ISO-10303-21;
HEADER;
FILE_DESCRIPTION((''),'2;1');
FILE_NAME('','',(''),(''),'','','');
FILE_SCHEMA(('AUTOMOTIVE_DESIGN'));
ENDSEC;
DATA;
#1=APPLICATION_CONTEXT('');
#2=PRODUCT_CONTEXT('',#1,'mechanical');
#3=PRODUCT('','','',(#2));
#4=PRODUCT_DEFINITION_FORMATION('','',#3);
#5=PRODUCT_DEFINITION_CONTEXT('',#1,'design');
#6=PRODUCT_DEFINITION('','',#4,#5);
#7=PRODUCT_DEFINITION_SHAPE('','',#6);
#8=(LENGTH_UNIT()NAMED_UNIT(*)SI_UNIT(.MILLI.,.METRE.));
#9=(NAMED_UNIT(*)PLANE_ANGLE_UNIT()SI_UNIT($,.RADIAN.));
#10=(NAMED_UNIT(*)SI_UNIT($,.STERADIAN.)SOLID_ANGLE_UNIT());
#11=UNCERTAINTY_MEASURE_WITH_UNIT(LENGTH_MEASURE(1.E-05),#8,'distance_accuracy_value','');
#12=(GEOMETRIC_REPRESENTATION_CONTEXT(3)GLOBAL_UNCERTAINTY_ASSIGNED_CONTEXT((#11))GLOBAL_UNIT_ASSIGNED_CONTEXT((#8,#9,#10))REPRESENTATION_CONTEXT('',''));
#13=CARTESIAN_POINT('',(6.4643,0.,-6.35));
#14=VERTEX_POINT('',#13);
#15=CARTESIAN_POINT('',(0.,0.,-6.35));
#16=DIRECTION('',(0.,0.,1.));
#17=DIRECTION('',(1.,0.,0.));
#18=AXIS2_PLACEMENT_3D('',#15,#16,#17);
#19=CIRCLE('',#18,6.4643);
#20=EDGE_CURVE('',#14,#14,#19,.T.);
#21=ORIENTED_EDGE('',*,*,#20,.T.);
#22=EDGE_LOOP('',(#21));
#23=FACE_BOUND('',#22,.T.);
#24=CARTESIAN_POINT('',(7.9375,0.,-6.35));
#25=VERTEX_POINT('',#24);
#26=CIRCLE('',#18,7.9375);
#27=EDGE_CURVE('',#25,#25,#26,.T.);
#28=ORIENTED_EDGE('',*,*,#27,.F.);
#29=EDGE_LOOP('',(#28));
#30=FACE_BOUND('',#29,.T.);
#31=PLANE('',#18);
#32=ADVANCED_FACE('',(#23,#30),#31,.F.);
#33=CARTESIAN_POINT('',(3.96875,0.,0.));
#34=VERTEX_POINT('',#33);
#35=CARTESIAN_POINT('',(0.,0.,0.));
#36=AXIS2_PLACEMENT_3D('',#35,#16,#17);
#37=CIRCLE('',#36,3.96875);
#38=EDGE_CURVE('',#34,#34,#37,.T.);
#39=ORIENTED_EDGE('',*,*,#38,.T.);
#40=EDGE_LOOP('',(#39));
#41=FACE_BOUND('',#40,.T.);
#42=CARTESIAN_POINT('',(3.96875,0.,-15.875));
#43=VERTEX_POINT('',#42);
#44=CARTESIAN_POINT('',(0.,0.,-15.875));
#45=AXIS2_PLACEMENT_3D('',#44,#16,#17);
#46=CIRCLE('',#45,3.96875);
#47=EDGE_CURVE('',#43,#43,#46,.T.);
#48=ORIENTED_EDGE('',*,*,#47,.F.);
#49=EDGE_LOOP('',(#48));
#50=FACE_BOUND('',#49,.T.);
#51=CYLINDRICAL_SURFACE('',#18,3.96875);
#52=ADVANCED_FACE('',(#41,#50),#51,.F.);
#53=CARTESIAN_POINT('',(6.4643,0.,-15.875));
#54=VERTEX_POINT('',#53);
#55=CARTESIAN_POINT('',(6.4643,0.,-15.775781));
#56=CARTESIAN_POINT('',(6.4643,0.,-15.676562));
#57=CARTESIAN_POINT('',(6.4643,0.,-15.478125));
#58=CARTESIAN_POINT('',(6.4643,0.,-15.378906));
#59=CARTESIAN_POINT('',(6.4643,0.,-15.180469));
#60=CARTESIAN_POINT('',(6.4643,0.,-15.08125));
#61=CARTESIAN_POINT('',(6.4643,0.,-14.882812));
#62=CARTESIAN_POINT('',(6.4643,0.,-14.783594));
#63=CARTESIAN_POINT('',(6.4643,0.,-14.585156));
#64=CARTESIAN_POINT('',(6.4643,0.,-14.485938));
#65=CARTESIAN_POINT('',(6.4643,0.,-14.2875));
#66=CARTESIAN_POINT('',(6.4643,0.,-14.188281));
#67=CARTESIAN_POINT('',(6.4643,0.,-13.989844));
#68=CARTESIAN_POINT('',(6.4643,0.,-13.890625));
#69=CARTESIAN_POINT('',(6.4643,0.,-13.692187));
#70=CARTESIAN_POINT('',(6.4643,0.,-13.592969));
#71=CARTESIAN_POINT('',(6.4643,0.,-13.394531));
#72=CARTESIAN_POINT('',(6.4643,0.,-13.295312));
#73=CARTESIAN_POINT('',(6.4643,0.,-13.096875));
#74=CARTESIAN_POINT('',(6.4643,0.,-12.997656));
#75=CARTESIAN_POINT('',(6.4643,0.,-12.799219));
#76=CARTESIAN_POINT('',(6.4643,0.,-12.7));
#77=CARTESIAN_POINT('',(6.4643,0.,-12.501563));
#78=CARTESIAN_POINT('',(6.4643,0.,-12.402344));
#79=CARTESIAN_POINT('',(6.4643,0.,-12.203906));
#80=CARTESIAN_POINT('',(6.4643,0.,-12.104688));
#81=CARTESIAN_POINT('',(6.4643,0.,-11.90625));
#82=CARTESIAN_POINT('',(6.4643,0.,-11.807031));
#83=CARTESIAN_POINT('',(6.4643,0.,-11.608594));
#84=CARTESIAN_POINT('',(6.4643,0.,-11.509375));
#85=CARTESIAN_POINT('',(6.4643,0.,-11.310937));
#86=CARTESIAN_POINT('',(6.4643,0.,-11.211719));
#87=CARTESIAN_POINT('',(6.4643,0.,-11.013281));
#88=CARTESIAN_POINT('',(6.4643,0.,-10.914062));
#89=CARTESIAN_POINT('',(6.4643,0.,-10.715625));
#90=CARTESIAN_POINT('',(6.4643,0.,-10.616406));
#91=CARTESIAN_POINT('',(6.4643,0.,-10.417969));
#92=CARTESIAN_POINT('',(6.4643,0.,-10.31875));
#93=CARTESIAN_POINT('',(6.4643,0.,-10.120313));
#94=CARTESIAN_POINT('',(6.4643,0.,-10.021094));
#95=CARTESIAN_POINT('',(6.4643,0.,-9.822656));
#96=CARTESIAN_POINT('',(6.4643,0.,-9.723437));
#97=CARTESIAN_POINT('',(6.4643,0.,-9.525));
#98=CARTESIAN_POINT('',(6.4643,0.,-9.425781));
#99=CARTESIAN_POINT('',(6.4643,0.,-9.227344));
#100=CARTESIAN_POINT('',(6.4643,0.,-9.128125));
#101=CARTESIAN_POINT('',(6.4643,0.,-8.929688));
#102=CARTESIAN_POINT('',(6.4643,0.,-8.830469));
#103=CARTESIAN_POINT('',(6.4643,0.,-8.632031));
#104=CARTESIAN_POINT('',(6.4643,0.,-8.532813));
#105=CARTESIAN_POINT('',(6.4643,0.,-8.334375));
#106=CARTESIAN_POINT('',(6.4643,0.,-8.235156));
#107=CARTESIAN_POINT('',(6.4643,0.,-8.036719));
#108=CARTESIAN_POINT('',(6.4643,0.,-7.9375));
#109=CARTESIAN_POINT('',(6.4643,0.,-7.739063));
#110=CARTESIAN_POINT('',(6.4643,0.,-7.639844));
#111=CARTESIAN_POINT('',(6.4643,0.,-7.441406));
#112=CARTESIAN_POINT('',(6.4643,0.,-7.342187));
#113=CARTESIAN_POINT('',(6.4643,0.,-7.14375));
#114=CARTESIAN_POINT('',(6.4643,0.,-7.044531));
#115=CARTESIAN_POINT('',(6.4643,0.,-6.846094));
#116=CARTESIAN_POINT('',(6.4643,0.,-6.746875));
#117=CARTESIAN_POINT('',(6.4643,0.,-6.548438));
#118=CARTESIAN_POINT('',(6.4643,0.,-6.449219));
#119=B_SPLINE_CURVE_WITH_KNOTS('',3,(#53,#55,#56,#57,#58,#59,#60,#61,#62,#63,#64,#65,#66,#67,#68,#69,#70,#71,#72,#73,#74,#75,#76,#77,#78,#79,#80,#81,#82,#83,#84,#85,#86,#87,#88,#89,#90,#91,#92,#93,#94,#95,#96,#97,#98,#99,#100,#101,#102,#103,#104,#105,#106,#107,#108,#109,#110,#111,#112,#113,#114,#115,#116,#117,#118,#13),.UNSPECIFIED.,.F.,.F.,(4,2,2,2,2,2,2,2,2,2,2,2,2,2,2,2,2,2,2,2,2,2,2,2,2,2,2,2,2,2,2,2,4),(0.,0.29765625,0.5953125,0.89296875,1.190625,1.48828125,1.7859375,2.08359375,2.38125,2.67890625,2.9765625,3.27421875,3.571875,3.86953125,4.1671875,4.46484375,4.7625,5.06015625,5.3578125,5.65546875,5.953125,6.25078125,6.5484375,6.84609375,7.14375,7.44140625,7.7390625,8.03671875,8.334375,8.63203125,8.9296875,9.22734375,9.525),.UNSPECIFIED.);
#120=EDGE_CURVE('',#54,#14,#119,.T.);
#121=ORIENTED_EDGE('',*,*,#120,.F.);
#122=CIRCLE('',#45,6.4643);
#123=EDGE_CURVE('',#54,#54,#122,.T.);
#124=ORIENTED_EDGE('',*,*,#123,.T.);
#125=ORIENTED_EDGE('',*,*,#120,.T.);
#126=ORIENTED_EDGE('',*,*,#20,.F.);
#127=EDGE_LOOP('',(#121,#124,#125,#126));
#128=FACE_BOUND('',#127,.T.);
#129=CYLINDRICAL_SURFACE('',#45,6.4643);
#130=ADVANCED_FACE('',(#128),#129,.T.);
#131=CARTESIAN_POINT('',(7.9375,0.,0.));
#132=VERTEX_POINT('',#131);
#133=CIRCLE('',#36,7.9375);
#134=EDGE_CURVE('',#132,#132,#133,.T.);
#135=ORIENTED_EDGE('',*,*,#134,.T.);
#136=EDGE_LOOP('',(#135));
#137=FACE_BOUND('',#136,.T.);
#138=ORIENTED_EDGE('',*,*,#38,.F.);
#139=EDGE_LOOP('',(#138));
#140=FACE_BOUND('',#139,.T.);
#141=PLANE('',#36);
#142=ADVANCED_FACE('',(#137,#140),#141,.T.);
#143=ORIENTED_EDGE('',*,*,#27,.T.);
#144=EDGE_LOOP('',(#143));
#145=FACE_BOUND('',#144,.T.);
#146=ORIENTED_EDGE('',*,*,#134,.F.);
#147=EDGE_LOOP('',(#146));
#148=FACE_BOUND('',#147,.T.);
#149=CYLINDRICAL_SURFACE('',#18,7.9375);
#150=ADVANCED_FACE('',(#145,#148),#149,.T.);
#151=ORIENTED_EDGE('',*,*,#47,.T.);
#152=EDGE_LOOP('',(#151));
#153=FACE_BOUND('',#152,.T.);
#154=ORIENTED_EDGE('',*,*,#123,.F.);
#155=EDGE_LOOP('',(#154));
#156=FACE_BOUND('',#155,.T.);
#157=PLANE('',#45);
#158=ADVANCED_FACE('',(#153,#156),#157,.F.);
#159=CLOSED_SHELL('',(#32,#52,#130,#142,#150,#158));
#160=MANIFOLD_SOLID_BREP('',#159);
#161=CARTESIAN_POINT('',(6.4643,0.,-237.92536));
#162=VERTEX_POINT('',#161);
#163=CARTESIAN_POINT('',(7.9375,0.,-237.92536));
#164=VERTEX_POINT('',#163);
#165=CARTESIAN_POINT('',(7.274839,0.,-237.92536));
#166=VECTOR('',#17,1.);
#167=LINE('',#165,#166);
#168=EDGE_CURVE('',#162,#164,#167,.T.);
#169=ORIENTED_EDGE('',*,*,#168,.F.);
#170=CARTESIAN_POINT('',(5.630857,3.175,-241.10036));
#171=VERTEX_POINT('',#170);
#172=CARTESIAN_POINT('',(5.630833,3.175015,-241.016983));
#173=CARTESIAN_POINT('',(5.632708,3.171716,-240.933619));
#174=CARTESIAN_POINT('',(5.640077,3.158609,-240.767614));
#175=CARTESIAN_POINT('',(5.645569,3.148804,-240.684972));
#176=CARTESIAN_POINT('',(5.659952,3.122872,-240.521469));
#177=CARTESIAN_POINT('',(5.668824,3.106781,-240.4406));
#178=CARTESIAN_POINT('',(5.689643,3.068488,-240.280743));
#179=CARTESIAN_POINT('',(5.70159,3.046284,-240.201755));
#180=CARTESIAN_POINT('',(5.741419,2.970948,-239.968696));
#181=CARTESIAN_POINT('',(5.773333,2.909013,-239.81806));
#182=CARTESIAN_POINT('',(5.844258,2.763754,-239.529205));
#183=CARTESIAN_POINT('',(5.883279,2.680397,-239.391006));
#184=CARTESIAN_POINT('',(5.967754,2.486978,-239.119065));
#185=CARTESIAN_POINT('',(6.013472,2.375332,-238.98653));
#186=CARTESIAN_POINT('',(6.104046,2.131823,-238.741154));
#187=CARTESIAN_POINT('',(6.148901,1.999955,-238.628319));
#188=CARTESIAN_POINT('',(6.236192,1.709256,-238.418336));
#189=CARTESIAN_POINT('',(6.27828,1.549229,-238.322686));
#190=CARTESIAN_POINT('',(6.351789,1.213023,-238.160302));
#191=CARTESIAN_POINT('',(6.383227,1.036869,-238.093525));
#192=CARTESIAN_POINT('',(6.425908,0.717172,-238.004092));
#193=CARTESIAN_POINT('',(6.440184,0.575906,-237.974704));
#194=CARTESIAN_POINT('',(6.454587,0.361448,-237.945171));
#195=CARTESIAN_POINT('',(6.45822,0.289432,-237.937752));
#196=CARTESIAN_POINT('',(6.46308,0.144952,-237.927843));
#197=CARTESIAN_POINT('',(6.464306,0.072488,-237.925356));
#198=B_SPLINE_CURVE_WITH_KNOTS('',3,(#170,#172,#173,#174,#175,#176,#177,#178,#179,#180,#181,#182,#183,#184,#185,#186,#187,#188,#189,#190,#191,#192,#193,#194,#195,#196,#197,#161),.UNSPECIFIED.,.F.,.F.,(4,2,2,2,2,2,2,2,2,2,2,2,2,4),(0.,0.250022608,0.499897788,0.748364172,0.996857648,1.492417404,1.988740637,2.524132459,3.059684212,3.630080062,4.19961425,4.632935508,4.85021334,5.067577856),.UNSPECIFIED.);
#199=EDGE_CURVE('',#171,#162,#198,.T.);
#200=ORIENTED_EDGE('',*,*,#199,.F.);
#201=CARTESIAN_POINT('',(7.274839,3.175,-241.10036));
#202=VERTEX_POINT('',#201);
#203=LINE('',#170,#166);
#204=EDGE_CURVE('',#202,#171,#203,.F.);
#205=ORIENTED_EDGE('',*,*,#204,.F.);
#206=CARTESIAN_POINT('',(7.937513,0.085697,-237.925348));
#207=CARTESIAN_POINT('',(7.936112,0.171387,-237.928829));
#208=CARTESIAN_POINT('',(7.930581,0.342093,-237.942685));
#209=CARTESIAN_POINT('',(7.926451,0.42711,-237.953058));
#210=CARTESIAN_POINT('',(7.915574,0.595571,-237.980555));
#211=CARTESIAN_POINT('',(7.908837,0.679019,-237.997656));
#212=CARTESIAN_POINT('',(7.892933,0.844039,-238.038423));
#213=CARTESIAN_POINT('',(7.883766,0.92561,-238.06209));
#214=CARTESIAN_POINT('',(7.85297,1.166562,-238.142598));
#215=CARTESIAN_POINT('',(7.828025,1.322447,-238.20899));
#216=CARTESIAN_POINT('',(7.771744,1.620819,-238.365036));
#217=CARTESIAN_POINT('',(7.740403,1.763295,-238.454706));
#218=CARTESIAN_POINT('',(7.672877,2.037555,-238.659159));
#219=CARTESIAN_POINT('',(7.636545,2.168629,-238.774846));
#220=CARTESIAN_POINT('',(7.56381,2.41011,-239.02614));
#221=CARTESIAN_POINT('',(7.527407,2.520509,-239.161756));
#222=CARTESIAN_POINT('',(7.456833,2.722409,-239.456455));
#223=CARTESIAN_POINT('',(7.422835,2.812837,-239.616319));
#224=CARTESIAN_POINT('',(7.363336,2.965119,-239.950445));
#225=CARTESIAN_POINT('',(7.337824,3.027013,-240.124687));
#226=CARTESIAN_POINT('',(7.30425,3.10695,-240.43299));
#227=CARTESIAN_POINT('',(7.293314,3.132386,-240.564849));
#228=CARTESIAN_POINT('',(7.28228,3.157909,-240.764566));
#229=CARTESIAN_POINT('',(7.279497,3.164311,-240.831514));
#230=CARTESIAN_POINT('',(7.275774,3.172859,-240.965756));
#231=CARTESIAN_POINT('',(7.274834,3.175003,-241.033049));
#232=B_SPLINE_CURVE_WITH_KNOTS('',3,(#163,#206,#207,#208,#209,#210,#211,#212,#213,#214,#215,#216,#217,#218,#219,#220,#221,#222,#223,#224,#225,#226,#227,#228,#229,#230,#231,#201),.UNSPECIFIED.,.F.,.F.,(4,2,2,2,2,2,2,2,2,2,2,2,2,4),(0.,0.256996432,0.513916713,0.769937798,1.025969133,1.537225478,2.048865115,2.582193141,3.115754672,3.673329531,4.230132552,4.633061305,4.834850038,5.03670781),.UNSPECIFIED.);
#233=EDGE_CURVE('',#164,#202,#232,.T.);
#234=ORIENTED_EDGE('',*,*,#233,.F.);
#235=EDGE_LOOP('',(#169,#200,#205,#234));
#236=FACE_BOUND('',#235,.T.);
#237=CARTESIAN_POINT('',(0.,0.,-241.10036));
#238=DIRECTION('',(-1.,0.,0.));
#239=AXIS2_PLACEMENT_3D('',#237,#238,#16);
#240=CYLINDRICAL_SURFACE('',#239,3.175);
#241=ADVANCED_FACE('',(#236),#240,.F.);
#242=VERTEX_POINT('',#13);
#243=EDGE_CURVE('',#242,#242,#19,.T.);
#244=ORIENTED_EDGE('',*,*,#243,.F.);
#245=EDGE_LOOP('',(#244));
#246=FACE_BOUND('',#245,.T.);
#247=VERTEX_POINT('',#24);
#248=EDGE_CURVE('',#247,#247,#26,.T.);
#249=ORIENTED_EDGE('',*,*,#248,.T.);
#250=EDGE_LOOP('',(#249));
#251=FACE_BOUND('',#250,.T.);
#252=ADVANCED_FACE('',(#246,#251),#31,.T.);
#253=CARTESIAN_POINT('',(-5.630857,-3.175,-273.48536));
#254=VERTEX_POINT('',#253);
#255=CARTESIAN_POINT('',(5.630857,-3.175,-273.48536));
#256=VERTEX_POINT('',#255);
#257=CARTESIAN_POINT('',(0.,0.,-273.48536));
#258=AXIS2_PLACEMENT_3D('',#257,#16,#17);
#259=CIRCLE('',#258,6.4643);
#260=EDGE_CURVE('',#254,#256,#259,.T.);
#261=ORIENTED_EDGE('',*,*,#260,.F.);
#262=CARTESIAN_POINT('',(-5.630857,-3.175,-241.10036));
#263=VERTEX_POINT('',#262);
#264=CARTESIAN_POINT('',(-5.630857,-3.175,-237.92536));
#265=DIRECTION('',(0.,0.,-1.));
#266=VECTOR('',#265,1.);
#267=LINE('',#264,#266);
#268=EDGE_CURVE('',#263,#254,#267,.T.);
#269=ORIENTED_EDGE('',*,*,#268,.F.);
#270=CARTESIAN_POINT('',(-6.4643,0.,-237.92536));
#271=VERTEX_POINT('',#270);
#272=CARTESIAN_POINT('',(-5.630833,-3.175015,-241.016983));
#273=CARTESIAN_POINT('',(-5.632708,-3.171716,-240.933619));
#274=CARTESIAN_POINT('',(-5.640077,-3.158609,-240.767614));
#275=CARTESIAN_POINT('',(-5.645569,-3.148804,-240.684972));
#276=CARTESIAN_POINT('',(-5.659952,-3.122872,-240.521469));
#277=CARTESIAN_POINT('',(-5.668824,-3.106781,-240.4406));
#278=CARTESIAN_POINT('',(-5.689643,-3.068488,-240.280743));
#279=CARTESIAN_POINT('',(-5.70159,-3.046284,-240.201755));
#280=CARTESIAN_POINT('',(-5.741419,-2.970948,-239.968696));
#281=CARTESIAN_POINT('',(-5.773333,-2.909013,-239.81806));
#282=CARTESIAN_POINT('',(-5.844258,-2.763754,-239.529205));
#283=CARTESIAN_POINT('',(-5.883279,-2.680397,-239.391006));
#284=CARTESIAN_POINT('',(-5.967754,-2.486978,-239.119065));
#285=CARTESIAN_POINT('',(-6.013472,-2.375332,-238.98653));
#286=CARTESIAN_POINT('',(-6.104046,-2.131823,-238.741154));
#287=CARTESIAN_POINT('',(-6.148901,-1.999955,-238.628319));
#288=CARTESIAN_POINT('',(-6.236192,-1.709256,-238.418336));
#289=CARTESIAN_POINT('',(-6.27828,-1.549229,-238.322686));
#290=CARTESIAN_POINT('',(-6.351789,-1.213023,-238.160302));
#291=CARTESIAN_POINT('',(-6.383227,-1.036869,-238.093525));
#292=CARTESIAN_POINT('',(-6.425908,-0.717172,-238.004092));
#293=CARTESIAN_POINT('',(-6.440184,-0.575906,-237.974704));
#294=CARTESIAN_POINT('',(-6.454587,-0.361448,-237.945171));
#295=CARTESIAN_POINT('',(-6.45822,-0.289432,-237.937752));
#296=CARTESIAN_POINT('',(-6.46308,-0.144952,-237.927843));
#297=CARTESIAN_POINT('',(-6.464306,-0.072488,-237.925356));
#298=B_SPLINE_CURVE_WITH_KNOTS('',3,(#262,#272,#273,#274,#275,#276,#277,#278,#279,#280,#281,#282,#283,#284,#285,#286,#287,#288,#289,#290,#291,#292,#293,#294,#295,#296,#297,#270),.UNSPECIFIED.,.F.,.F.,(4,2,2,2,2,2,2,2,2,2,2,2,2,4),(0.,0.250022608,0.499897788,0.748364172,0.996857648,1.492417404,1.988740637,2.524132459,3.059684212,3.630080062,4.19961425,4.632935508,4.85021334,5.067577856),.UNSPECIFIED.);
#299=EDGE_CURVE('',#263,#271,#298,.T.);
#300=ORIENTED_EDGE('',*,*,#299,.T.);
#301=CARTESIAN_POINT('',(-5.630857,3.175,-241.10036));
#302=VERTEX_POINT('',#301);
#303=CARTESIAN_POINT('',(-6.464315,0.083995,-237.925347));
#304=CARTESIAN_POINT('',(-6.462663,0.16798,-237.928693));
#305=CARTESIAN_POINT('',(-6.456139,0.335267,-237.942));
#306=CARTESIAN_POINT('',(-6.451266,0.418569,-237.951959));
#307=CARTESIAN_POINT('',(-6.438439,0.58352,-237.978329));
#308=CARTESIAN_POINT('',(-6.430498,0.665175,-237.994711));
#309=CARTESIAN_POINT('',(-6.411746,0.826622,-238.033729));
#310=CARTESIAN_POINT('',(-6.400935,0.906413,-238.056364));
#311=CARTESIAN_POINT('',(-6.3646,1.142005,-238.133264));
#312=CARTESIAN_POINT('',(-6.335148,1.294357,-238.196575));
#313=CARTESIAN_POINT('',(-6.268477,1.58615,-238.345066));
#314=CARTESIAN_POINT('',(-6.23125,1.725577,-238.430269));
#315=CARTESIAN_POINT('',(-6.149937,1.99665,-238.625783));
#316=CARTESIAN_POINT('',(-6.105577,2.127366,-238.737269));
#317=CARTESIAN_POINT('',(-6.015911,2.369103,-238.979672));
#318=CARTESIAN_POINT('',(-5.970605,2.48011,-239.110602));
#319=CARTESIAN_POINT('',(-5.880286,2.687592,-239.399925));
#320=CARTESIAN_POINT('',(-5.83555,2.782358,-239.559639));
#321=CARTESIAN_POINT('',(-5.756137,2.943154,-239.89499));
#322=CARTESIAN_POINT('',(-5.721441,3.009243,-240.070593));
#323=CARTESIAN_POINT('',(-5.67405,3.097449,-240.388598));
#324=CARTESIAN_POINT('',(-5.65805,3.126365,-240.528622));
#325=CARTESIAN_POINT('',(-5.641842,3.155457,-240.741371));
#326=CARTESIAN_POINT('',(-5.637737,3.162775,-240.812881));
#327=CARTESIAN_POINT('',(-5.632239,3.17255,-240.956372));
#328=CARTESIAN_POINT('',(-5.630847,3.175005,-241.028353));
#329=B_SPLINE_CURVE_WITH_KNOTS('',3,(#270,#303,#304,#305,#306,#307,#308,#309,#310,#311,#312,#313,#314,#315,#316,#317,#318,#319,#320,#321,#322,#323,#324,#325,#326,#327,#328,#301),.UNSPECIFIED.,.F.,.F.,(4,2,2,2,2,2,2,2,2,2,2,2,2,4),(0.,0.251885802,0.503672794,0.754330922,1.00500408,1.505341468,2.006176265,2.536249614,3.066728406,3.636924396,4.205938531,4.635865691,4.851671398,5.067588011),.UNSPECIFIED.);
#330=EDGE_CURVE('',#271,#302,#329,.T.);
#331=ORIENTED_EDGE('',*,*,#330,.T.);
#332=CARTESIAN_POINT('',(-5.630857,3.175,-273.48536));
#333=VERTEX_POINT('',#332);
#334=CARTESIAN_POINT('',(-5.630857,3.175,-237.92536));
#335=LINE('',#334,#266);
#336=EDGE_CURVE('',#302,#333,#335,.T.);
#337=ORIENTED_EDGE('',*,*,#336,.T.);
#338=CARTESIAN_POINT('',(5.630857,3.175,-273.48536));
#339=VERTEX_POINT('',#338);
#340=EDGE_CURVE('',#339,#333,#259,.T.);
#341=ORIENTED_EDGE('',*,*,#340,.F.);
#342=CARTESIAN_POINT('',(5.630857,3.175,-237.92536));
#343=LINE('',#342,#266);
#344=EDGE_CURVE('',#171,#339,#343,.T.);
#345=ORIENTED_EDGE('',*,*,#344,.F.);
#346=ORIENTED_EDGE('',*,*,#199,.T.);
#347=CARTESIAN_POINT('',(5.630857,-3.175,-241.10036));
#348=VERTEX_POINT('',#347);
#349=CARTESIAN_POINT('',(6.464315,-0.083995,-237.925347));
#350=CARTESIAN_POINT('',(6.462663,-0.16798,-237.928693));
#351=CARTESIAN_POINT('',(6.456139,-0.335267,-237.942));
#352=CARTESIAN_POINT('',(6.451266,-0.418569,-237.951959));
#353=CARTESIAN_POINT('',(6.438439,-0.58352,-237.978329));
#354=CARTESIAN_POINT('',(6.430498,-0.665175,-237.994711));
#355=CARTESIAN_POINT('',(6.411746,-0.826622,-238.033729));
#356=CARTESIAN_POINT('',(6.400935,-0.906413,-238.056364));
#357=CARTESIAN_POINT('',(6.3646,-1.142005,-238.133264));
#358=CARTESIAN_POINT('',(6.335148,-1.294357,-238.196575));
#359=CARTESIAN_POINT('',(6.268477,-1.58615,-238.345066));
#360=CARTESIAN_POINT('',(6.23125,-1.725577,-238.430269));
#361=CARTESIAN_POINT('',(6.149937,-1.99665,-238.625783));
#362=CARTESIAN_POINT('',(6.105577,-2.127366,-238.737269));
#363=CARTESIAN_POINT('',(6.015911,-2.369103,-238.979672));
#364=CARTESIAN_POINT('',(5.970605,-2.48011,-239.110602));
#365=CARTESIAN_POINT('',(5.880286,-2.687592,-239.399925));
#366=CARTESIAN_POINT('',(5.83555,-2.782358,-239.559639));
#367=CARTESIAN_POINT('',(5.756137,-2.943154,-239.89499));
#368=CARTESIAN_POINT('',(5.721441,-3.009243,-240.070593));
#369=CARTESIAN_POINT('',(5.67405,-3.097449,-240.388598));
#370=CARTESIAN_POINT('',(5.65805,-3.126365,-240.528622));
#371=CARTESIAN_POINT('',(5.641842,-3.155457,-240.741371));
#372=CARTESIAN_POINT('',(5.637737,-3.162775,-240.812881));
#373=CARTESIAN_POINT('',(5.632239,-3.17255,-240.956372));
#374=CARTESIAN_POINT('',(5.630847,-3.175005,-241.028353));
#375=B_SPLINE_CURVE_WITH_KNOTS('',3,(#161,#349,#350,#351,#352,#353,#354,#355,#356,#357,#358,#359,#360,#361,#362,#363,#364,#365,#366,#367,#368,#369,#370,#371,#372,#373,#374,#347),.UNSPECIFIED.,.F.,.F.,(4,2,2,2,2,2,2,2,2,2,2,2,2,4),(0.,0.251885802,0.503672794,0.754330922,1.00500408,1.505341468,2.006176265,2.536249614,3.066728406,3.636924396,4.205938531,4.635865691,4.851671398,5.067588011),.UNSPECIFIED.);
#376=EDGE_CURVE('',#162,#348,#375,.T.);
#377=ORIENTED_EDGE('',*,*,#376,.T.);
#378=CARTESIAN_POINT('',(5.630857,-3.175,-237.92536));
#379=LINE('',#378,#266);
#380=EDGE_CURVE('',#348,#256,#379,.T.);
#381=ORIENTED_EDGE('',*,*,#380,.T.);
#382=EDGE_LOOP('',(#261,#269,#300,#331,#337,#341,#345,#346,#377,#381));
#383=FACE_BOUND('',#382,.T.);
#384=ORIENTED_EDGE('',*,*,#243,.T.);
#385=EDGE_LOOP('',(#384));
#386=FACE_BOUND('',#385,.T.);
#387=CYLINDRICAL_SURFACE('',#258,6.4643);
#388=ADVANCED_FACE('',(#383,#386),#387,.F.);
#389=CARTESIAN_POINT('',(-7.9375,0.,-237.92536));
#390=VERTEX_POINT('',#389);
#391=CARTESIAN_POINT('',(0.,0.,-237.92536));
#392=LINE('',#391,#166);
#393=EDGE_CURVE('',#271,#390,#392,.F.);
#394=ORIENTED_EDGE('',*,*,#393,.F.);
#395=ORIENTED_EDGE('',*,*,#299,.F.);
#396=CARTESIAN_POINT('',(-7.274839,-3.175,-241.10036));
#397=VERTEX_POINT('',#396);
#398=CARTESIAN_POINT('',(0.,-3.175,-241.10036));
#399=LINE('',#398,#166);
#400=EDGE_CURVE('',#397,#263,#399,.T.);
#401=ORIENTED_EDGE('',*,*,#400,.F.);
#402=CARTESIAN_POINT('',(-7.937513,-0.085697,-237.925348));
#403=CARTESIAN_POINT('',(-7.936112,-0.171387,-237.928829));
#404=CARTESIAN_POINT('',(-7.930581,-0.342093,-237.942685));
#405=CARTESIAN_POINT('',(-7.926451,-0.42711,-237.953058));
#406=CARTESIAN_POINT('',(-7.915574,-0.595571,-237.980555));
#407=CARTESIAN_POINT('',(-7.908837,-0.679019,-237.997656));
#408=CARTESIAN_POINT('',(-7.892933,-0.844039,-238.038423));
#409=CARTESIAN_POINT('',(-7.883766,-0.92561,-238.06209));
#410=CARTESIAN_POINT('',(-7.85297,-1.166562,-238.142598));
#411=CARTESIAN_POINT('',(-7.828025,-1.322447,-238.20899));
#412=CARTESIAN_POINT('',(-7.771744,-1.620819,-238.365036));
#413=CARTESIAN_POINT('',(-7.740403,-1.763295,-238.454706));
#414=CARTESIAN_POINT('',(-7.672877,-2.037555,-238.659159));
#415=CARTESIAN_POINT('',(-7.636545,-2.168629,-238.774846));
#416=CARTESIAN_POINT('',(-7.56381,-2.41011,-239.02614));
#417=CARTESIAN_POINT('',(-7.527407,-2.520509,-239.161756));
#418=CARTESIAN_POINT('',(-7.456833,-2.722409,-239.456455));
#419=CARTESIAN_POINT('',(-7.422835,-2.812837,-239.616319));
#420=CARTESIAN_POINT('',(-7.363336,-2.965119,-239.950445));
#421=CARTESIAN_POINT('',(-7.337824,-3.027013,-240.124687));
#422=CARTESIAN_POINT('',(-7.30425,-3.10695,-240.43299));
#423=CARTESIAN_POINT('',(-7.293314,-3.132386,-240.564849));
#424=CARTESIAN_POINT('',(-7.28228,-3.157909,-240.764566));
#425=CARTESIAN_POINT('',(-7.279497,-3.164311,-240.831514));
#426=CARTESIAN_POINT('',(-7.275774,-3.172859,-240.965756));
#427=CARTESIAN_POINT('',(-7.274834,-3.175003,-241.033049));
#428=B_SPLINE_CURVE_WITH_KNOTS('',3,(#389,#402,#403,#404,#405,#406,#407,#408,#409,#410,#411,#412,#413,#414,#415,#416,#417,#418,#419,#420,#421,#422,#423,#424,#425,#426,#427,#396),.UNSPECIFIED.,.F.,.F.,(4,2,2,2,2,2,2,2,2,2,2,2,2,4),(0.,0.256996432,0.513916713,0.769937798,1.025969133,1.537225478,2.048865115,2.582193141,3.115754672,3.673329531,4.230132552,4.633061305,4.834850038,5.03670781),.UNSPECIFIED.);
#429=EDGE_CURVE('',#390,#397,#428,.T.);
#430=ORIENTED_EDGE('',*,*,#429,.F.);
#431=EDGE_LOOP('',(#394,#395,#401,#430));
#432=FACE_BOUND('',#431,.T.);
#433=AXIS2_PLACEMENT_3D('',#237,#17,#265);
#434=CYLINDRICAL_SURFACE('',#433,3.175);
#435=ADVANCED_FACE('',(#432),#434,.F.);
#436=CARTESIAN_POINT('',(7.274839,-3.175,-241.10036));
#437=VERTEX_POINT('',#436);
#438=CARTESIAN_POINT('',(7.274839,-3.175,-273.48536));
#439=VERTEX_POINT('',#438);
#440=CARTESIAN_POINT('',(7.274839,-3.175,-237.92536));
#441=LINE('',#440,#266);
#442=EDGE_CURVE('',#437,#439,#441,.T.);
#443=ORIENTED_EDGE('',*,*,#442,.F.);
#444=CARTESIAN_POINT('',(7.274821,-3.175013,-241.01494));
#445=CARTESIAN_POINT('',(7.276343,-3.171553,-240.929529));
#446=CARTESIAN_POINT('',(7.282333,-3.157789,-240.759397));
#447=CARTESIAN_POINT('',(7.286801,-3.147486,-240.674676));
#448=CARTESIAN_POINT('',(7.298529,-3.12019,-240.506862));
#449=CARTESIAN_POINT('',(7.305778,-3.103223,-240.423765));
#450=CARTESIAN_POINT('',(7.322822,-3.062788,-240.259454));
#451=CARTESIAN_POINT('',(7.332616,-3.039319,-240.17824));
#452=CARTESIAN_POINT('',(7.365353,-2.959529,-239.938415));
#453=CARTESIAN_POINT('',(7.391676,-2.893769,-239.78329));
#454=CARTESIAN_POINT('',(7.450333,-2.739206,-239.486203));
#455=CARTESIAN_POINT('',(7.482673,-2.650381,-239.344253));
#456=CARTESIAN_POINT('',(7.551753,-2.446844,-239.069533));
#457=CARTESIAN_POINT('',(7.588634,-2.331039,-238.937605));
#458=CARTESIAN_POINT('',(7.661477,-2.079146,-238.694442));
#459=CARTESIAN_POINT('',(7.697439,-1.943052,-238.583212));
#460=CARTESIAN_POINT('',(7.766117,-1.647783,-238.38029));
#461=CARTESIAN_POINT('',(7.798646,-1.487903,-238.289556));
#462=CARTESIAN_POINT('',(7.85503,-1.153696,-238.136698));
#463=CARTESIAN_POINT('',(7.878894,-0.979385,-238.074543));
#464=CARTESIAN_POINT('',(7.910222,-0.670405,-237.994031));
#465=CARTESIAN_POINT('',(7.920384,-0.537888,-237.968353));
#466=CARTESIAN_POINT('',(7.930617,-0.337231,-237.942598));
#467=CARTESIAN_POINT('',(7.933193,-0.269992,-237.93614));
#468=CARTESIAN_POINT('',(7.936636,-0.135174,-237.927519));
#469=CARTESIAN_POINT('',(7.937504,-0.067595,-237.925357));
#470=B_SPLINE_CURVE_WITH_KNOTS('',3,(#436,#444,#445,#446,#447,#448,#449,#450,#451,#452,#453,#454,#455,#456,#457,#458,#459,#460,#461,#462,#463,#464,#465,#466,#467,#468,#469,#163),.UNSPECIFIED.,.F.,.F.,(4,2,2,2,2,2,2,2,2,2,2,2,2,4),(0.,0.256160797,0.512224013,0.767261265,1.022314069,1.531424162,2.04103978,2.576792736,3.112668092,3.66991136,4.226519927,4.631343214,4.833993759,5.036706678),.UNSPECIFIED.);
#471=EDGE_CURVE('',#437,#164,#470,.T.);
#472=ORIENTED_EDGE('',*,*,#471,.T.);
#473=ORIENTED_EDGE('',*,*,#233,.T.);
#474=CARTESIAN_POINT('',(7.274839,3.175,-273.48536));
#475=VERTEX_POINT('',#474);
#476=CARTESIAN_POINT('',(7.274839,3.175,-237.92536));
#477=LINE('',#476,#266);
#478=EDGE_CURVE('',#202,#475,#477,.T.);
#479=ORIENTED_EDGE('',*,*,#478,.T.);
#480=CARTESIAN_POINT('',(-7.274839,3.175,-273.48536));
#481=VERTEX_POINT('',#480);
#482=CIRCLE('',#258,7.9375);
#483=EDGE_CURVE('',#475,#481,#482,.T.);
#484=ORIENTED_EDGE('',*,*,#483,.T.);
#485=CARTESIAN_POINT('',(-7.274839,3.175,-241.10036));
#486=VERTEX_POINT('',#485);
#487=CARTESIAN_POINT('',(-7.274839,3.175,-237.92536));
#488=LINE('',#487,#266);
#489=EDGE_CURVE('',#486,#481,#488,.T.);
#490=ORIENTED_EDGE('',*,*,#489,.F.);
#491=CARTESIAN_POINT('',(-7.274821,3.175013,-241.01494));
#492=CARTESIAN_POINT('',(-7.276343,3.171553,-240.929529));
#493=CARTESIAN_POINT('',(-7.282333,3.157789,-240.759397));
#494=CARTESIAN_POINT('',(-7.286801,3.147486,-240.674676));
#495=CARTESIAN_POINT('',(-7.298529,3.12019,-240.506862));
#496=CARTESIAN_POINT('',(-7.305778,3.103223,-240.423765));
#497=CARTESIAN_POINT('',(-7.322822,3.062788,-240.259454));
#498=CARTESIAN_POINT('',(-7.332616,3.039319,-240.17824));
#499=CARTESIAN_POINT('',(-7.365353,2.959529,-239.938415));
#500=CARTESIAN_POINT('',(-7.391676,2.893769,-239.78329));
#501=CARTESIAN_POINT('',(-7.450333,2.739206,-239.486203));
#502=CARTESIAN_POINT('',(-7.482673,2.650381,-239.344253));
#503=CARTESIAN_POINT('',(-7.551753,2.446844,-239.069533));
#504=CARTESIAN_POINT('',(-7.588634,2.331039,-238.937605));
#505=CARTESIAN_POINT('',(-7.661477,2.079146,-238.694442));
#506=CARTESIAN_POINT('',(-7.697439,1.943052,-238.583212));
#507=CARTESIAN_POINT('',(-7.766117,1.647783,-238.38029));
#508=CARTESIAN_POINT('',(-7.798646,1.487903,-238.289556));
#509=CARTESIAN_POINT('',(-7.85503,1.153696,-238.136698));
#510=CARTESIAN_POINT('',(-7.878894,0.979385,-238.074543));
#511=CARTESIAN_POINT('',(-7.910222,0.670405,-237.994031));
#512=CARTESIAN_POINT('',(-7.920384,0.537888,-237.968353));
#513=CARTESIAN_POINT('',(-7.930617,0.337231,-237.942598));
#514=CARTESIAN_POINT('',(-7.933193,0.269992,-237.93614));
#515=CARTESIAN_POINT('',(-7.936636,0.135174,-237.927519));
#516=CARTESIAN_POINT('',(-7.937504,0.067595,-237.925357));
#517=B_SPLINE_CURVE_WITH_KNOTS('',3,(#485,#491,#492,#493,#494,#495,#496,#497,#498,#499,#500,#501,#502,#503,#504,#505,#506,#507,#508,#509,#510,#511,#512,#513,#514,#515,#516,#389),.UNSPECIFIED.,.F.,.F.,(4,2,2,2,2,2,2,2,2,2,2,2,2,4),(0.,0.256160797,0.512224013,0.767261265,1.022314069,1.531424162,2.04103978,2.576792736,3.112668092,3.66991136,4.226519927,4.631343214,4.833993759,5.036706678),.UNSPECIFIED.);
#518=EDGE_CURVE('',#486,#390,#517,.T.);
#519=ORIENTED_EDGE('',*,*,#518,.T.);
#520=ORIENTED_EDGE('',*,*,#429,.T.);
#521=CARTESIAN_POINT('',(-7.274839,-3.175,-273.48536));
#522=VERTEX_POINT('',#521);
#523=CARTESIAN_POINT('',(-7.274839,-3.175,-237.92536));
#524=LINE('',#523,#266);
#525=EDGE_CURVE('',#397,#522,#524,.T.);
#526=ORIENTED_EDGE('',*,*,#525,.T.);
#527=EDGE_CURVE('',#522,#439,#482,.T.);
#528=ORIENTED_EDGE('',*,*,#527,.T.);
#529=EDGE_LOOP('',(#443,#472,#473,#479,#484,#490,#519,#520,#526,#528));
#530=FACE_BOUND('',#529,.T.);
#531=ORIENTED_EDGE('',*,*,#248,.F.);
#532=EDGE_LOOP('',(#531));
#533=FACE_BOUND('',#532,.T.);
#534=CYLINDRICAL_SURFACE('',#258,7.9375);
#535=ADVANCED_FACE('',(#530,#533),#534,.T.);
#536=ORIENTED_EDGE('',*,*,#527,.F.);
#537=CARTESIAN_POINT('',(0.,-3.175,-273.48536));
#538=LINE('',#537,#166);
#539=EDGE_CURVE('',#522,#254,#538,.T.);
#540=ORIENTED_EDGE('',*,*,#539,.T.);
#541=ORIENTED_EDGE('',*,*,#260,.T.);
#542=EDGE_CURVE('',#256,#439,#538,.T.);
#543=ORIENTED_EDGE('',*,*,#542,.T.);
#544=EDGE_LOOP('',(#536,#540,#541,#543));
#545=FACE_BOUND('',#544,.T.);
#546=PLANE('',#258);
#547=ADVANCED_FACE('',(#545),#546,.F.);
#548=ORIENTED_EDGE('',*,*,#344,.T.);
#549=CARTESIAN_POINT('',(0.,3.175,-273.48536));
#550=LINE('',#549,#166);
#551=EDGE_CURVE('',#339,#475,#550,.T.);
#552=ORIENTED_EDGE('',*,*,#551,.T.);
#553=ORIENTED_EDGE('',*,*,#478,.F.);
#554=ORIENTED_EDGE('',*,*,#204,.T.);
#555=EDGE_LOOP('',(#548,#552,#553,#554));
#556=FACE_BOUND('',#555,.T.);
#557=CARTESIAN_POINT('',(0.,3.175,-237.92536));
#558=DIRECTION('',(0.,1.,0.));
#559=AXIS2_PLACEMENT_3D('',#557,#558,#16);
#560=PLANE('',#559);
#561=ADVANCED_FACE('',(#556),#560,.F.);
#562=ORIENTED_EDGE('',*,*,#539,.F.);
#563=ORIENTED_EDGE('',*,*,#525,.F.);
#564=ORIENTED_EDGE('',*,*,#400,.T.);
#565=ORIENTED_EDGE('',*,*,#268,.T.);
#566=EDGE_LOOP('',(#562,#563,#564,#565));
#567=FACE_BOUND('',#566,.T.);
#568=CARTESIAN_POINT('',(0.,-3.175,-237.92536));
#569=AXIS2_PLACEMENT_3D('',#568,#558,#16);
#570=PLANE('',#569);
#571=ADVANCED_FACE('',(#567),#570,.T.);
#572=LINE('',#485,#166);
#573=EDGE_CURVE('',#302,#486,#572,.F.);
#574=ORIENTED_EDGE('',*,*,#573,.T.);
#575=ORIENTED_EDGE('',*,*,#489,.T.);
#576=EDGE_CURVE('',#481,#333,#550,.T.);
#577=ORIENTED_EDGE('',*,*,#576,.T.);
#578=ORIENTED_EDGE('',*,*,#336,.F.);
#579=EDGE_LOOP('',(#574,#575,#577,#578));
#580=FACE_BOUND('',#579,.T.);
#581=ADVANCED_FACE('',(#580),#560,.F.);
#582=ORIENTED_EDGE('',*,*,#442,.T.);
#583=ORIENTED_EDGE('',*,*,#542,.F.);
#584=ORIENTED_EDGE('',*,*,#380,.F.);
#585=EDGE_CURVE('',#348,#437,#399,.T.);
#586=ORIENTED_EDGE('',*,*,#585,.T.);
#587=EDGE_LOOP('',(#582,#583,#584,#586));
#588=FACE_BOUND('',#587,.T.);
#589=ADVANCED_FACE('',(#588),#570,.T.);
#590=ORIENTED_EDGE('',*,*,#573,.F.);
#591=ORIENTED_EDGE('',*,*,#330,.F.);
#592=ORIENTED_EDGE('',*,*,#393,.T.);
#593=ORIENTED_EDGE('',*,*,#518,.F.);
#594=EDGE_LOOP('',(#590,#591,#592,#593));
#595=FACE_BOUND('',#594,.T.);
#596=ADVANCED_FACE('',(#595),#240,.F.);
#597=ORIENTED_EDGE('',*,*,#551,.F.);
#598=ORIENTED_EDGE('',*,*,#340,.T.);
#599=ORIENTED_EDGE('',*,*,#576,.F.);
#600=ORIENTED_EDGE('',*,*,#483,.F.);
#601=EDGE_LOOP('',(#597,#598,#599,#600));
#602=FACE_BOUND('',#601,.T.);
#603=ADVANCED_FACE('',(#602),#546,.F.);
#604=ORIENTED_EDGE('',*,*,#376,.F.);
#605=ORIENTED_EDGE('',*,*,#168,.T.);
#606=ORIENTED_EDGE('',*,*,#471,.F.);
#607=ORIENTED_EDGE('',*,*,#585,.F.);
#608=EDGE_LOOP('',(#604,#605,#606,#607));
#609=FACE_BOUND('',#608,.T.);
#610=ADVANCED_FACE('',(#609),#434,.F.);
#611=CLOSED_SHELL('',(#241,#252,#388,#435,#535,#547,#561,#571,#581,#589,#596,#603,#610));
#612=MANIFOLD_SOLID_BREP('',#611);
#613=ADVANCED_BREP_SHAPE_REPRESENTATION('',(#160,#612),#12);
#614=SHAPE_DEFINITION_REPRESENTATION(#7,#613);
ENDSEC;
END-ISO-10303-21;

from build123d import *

# Parameters (mm, degrees)
THREADED_INSERT_1_1_DEPTH = 6.35
THREADED_START            = -6.35
THREADED_INSERT_1_2_DEPTH = 9.525
A_ARM_START               = -6.35
A_ARM_TUBE_DEPTH          = 267.13536
APEX_START                = -237.92536
APEX_SLOT_DEPTH           = 35.56
FILLET1_R                 = 3.175


with BuildPart() as part:
    # Sketch1 → Threaded insert 1-1 (new body)
    with BuildSketch(Plane.XY):
        with BuildLine():
            ThreePointArc((-2.38125, 3.175), (0, 3.96875), (2.38125, 3.175))
            Line((2.38125, 3.175), (5.630856905, 3.175))
            ThreePointArc((5.630856905, 3.175), (0, 6.4643), (-5.630856905, 3.175))
            Line((-5.630856905, 3.175), (-2.38125, 3.175))
        make_face()
        with BuildLine():
            ThreePointArc((-5.630856905, 3.175), (0, 6.4643), (5.630856905, 3.175))
            Line((5.630856905, 3.175), (7.274838916, 3.175))
            ThreePointArc((7.274838916, 3.175), (0, 7.9375), (-7.274838916, 3.175))
            Line((-7.274838916, 3.175), (-5.630856905, 3.175))
        make_face()
        with BuildLine():
            ThreePointArc((2.38125, 3.175), (3.549757914, 1.774878957), (3.96875, 0))
            Line((3.96875, 0), (6.4643, 0))
            ThreePointArc((6.4643, 0), (6.252468424, 1.641283978), (5.630856905, 3.175))
            Line((5.630856905, 3.175), (2.38125, 3.175))
        make_face()
        with BuildLine():
            Line((-6.4643, 0), (-3.96875, 0))
            ThreePointArc((-3.96875, 0), (-3.549757914, 1.774878957), (-2.38125, 3.175))
            Line((-2.38125, 3.175), (-5.630856905, 3.175))
            ThreePointArc((-5.630856905, 3.175), (-6.252468424, 1.641283978), (-6.4643, 0))
        make_face()
        with BuildLine():
            ThreePointArc((5.630856905, 3.175), (6.252468424, 1.641283978), (6.4643, 0))
            Line((6.4643, 0), (7.9375, 0))
            ThreePointArc((7.9375, 0), (7.770068859, 1.621707797), (7.274838916, 3.175))
            Line((7.274838916, 3.175), (5.630856905, 3.175))
        make_face()
        with BuildLine():
            Line((-7.9375, 0), (-6.4643, 0))
            ThreePointArc((-6.4643, 0), (-6.252468424, 1.641283978), (-5.630856905, 3.175))
            Line((-5.630856905, 3.175), (-7.274838916, 3.175))
            ThreePointArc((-7.274838916, 3.175), (-7.770068859, 1.621707797), (-7.9375, 0))
        make_face()
        with BuildLine():
            Line((7.9375, 0), (6.4643, 0))
            ThreePointArc((6.4643, 0), (6.252468424, -1.641283978), (5.630856905, -3.175))
            Line((5.630856905, -3.175), (7.274838916, -3.175))
            ThreePointArc((7.274838916, -3.175), (7.770068859, -1.621707797), (7.9375, 0))
        make_face()
        with BuildLine():
            ThreePointArc((-5.630856905, -3.175), (-6.252468424, -1.641283978), (-6.4643, 0))
            Line((-6.4643, 0), (-7.9375, 0))
            ThreePointArc((-7.9375, 0), (-7.770068859, -1.621707797), (-7.274838916, -3.175))
            Line((-7.274838916, -3.175), (-5.630856905, -3.175))
        make_face()
        with BuildLine():
            Line((6.4643, 0), (3.96875, 0))
            ThreePointArc((3.96875, 0), (3.549757914, -1.774878957), (2.38125, -3.175))
            Line((2.38125, -3.175), (5.630856905, -3.175))
            ThreePointArc((5.630856905, -3.175), (6.252468424, -1.641283978), (6.4643, 0))
        make_face()
        with BuildLine():
            ThreePointArc((-2.38125, -3.175), (-3.549757914, -1.774878957), (-3.96875, 0))
            Line((-3.96875, 0), (-6.4643, 0))
            ThreePointArc((-6.4643, 0), (-6.252468424, -1.641283978), (-5.630856905, -3.175))
            Line((-5.630856905, -3.175), (-2.38125, -3.175))
        make_face()
        with BuildLine():
            Line((5.630856905, -3.175), (2.38125, -3.175))
            ThreePointArc((2.38125, -3.175), (0, -3.96875), (-2.38125, -3.175))
            Line((-2.38125, -3.175), (-5.630856905, -3.175))
            ThreePointArc((-5.630856905, -3.175), (0, -6.4643), (5.630856905, -3.175))
        make_face()
        with BuildLine():
            Line((7.274838916, -3.175), (5.630856905, -3.175))
            ThreePointArc((5.630856905, -3.175), (0, -6.4643), (-5.630856905, -3.175))
            Line((-5.630856905, -3.175), (-7.274838916, -3.175))
            ThreePointArc((-7.274838916, -3.175), (0, -7.9375), (7.274838916, -3.175))
        make_face()
    extrude(amount=-THREADED_INSERT_1_1_DEPTH)

    # Sketch1<3> → Threaded insert 1-2 (add)
    with BuildSketch(Plane.XY.offset(THREADED_START)):
        with BuildLine():
            ThreePointArc((-2.38125, 3.175), (0, 3.96875), (2.38125, 3.175))
            Line((2.38125, 3.175), (5.630856905, 3.175))
            ThreePointArc((5.630856905, 3.175), (0, 6.4643), (-5.630856905, 3.175))
            Line((-5.630856905, 3.175), (-2.38125, 3.175))
        make_face()
        with BuildLine():
            ThreePointArc((2.38125, 3.175), (3.549757914, 1.774878957), (3.96875, 0))
            Line((3.96875, 0), (6.4643, 0))
            ThreePointArc((6.4643, 0), (6.252468424, 1.641283978), (5.630856905, 3.175))
            Line((5.630856905, 3.175), (2.38125, 3.175))
        make_face()
        with BuildLine():
            Line((-6.4643, 0), (-3.96875, 0))
            ThreePointArc((-3.96875, 0), (-3.549757914, 1.774878957), (-2.38125, 3.175))
            Line((-2.38125, 3.175), (-5.630856905, 3.175))
            ThreePointArc((-5.630856905, 3.175), (-6.252468424, 1.641283978), (-6.4643, 0))
        make_face()
        with BuildLine():
            Line((6.4643, 0), (3.96875, 0))
            ThreePointArc((3.96875, 0), (3.549757914, -1.774878957), (2.38125, -3.175))
            Line((2.38125, -3.175), (5.630856905, -3.175))
            ThreePointArc((5.630856905, -3.175), (6.252468424, -1.641283978), (6.4643, 0))
        make_face()
        with BuildLine():
            ThreePointArc((-2.38125, -3.175), (-3.549757914, -1.774878957), (-3.96875, 0))
            Line((-3.96875, 0), (-6.4643, 0))
            ThreePointArc((-6.4643, 0), (-6.252468424, -1.641283978), (-5.630856905, -3.175))
            Line((-5.630856905, -3.175), (-2.38125, -3.175))
        make_face()
        with BuildLine():
            Line((5.630856905, -3.175), (2.38125, -3.175))
            ThreePointArc((2.38125, -3.175), (0, -3.96875), (-2.38125, -3.175))
            Line((-2.38125, -3.175), (-5.630856905, -3.175))
            ThreePointArc((-5.630856905, -3.175), (0, -6.4643), (5.630856905, -3.175))
        make_face()
    extrude(amount=-THREADED_INSERT_1_2_DEPTH)


with BuildPart() as body_2:
    # Sketch1<4> → A-arm tube (new body)
    with BuildSketch(Plane.XY.offset(A_ARM_START)):
        with BuildLine():
            ThreePointArc((-5.630856905, 3.175), (0, 6.4643), (5.630856905, 3.175))
            Line((5.630856905, 3.175), (7.274838916, 3.175))
            ThreePointArc((7.274838916, 3.175), (0, 7.9375), (-7.274838916, 3.175))
            Line((-7.274838916, 3.175), (-5.630856905, 3.175))
        make_face()
        with BuildLine():
            ThreePointArc((5.630856905, 3.175), (6.252468424, 1.641283978), (6.4643, 0))
            Line((6.4643, 0), (7.9375, 0))
            ThreePointArc((7.9375, 0), (7.770068859, 1.621707797), (7.274838916, 3.175))
            Line((7.274838916, 3.175), (5.630856905, 3.175))
        make_face()
        with BuildLine():
            Line((-7.9375, 0), (-6.4643, 0))
            ThreePointArc((-6.4643, 0), (-6.252468424, 1.641283978), (-5.630856905, 3.175))
            Line((-5.630856905, 3.175), (-7.274838916, 3.175))
            ThreePointArc((-7.274838916, 3.175), (-7.770068859, 1.621707797), (-7.9375, 0))
        make_face()
        with BuildLine():
            Line((7.9375, 0), (6.4643, 0))
            ThreePointArc((6.4643, 0), (6.252468424, -1.641283978), (5.630856905, -3.175))
            Line((5.630856905, -3.175), (7.274838916, -3.175))
            ThreePointArc((7.274838916, -3.175), (7.770068859, -1.621707797), (7.9375, 0))
        make_face()
        with BuildLine():
            ThreePointArc((-5.630856905, -3.175), (-6.252468424, -1.641283978), (-6.4643, 0))
            Line((-6.4643, 0), (-7.9375, 0))
            ThreePointArc((-7.9375, 0), (-7.770068859, -1.621707797), (-7.274838916, -3.175))
            Line((-7.274838916, -3.175), (-5.630856905, -3.175))
        make_face()
        with BuildLine():
            Line((7.274838916, -3.175), (5.630856905, -3.175))
            ThreePointArc((5.630856905, -3.175), (0, -6.4643), (-5.630856905, -3.175))
            Line((-5.630856905, -3.175), (-7.274838916, -3.175))
            ThreePointArc((-7.274838916, -3.175), (0, -7.9375), (7.274838916, -3.175))
        make_face()
    extrude(amount=-A_ARM_TUBE_DEPTH)

    # Sketch1<5> → Apex slot (cut)
    with BuildSketch(Plane.XY.offset(APEX_START)):
        with BuildLine():
            ThreePointArc((5.630856905, 3.175), (6.252468424, 1.641283978), (6.4643, 0))
            Line((6.4643, 0), (7.9375, 0))
            ThreePointArc((7.9375, 0), (7.770068859, 1.621707797), (7.274838916, 3.175))
            Line((7.274838916, 3.175), (5.630856905, 3.175))
        make_face()
        with BuildLine():
            Line((-7.9375, 0), (-6.4643, 0))
            ThreePointArc((-6.4643, 0), (-6.252468424, 1.641283978), (-5.630856905, 3.175))
            Line((-5.630856905, 3.175), (-7.274838916, 3.175))
            ThreePointArc((-7.274838916, 3.175), (-7.770068859, 1.621707797), (-7.9375, 0))
        make_face()
        with BuildLine():
            Line((7.9375, 0), (6.4643, 0))
            ThreePointArc((6.4643, 0), (6.252468424, -1.641283978), (5.630856905, -3.175))
            Line((5.630856905, -3.175), (7.274838916, -3.175))
            ThreePointArc((7.274838916, -3.175), (7.770068859, -1.621707797), (7.9375, 0))
        make_face()
        with BuildLine():
            ThreePointArc((-5.630856905, -3.175), (-6.252468424, -1.641283978), (-6.4643, 0))
            Line((-6.4643, 0), (-7.9375, 0))
            ThreePointArc((-7.9375, 0), (-7.770068859, -1.621707797), (-7.274838916, -3.175))
            Line((-7.274838916, -3.175), (-5.630856905, -3.175))
        make_face()
    extrude(amount=-APEX_SLOT_DEPTH, mode=Mode.SUBTRACT)

    # Fillet1
    # the kernel refuses this fillet: 3.175 mm, written as the material it adds along each edge
    with BuildSketch(Plane(origin=(2.306643095, 3.175, -237.92536), x_dir=(0, 0, -1), z_dir=(-1, 0, 0))) as fillet1_piece_1_section:
        with BuildLine():
            CenterArc((FILLET1_R, FILLET1_R), FILLET1_R, 180, 90)
            Line((0, FILLET1_R), (0, 0))
            Line((0, 0), (FILLET1_R, 0))
        make_face()
    fillet1_piece_1 = extrude(amount=17.51898201, mode=Mode.PRIVATE)
    fillet1_piece_1 = fillet1_piece_1 - Plane(origin=(0, 0, -238.64509262), x_dir=(-0.8710698614669244, 0.49115913555994567, 0), z_dir=(0, 0, 1)) * Cylinder(6.4643, 48, mode=Mode.PRIVATE)
    fillet1_piece_1 = fillet1_piece_1 & Plane(origin=(0, 0, -238.64509262), x_dir=(-1, 0, 0), z_dir=(0, 0, 1)) * Cylinder(7.9375, 48, mode=Mode.PRIVATE)
    add(fillet1_piece_1)
    with BuildSketch(Plane(origin=(-15.212338916, -3.175, -237.92536), x_dir=(0, 0, -1), z_dir=(1, 0, 0))) as fillet1_piece_2_section:
        with BuildLine():
            CenterArc((FILLET1_R, FILLET1_R), FILLET1_R, 180, 90)
            Line((0, FILLET1_R), (0, 0))
            Line((0, 0), (FILLET1_R, 0))
        make_face()
    fillet1_piece_2 = extrude(amount=17.51898201, mode=Mode.PRIVATE)
    fillet1_piece_2 = fillet1_piece_2 - Plane(origin=(0, 0, -238.645092783), x_dir=(-0.8710698614669244, 0.49115913555994567, 0), z_dir=(0, 0, 1)) * Cylinder(6.4643, 48, mode=Mode.PRIVATE)
    fillet1_piece_2 = fillet1_piece_2 & Plane(origin=(0, 0, -238.645092783), x_dir=(-1, 0, 0), z_dir=(0, 0, 1)) * Cylinder(7.9375, 48, mode=Mode.PRIVATE)
    add(fillet1_piece_2)
    with BuildSketch(Plane(origin=(-2.306643095, -3.175, -237.92536), x_dir=(0, 0, -1), z_dir=(1, 0, 0))) as fillet1_piece_3_section:
        with BuildLine():
            CenterArc((FILLET1_R, FILLET1_R), FILLET1_R, 180, 90)
            Line((0, FILLET1_R), (0, 0))
            Line((0, 0), (FILLET1_R, 0))
        make_face()
    fillet1_piece_3 = extrude(amount=17.51898201, mode=Mode.PRIVATE)
    fillet1_piece_3 = fillet1_piece_3 - Plane(origin=(0, 0, -238.64509262), x_dir=(-0.8710698614669244, 0.49115913555994567, 0), z_dir=(0, 0, 1)) * Cylinder(6.4643, 48, mode=Mode.PRIVATE)
    fillet1_piece_3 = fillet1_piece_3 & Plane(origin=(0, 0, -238.64509262), x_dir=(-1, 0, 0), z_dir=(0, 0, 1)) * Cylinder(7.9375, 48, mode=Mode.PRIVATE)
    add(fillet1_piece_3)
    with BuildSketch(Plane(origin=(15.212338916, 3.175, -237.92536), x_dir=(0, -1, 0), z_dir=(-1, 0, 0))) as fillet1_piece_4_section:
        with BuildLine():
            CenterArc((FILLET1_R, -FILLET1_R), FILLET1_R, 90, 90)
            Line((0, -FILLET1_R), (0, 0))
            Line((0, 0), (FILLET1_R, 0))
        make_face()
    fillet1_piece_4 = extrude(amount=17.51898201, mode=Mode.PRIVATE)
    fillet1_piece_4 = fillet1_piece_4 - Plane(origin=(0, 0, -238.645092609), x_dir=(-0.8710698614669244, 0.49115913555994567, 0), z_dir=(0, 0, 1)) * Cylinder(6.4643, 48, mode=Mode.PRIVATE)
    fillet1_piece_4 = fillet1_piece_4 & Plane(origin=(0, 0, -238.645092609), x_dir=(-1, 0, 0), z_dir=(0, 0, 1)) * Cylinder(7.9375, 48, mode=Mode.PRIVATE)
    add(fillet1_piece_4)


solid = Compound([part.part, body_2.part])
